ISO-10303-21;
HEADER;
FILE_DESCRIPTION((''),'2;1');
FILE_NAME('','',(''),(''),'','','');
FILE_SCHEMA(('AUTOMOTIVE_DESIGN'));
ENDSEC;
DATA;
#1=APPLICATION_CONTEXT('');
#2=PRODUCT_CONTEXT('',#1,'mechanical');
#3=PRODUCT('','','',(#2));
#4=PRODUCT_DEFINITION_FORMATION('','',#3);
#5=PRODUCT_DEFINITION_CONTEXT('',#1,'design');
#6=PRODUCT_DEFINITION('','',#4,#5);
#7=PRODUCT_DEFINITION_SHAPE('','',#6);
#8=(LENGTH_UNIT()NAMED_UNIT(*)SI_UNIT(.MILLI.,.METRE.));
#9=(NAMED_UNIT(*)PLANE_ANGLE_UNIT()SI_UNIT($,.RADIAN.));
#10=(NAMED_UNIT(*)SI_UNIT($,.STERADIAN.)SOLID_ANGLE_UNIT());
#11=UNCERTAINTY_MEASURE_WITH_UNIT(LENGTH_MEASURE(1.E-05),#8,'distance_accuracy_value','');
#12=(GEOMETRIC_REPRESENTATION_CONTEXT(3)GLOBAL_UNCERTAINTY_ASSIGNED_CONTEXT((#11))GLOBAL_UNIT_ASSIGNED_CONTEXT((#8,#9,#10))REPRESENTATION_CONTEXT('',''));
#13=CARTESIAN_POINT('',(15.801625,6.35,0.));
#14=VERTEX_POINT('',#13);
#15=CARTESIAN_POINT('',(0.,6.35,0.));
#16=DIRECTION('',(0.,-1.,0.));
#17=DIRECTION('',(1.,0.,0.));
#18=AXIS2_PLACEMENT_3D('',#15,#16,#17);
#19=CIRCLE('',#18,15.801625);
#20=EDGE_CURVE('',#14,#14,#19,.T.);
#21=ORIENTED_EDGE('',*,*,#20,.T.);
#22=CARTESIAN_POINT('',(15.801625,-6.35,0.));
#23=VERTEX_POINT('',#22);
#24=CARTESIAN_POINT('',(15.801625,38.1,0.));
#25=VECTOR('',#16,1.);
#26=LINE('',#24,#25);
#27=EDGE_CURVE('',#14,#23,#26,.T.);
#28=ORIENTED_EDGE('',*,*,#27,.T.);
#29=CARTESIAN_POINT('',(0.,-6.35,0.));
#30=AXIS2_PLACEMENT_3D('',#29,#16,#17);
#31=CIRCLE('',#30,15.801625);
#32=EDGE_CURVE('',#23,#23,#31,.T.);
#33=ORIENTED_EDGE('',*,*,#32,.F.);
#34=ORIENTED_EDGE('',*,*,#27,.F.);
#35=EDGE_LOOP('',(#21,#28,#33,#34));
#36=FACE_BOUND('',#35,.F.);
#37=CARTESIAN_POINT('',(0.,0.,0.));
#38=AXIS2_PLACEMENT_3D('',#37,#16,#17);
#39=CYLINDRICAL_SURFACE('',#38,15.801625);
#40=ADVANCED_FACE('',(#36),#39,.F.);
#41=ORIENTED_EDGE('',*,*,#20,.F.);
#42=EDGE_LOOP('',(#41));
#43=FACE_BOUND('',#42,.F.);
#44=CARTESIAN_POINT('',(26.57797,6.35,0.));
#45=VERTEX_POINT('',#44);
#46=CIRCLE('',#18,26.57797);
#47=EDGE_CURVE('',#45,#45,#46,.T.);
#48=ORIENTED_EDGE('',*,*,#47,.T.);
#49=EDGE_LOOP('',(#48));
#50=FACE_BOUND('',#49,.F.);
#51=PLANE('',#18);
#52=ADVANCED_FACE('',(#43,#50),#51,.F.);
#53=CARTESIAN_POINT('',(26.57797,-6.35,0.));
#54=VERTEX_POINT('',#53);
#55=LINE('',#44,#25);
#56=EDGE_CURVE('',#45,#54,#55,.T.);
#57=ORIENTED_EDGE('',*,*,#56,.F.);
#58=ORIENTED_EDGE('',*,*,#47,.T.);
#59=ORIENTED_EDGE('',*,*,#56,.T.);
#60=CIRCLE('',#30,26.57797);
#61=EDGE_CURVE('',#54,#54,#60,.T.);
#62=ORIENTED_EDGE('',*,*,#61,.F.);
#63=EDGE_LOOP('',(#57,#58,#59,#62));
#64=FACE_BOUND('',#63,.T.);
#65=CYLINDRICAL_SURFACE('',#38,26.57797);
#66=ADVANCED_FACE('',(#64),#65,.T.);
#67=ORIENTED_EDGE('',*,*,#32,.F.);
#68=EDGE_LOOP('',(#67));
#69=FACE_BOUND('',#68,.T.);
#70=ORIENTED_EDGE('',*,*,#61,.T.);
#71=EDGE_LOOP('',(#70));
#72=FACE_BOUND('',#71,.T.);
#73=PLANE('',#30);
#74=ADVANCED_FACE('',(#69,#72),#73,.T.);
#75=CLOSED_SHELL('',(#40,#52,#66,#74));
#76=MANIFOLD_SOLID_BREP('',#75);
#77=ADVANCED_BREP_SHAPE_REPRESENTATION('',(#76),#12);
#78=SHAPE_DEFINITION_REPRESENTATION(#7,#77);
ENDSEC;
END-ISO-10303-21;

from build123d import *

# Parameters (mm, degrees)
F0_R     = 26.5779703786
F1_DEPTH = 6.35
F4_R     = 15.8016250511
F5_DEPTH = 38.1


# Not quite as in the source:
# - the program builds the solid bodies; features that only make, move or delete a surface that nothing else refers to are left out


with BuildPart() as f1:
    # F0 (on Front) → F1 (new body, symmetric)
    with BuildSketch(Plane.XZ):
        Circle(F0_R)
    extrude(amount=F1_DEPTH, both=True)

    # F4 (on Front) → F5 (cut, symmetric)
    with BuildSketch(Plane.XZ):
        Circle(F4_R)
    extrude(amount=F5_DEPTH, both=True, mode=Mode.SUBTRACT)


solid = f1.part
